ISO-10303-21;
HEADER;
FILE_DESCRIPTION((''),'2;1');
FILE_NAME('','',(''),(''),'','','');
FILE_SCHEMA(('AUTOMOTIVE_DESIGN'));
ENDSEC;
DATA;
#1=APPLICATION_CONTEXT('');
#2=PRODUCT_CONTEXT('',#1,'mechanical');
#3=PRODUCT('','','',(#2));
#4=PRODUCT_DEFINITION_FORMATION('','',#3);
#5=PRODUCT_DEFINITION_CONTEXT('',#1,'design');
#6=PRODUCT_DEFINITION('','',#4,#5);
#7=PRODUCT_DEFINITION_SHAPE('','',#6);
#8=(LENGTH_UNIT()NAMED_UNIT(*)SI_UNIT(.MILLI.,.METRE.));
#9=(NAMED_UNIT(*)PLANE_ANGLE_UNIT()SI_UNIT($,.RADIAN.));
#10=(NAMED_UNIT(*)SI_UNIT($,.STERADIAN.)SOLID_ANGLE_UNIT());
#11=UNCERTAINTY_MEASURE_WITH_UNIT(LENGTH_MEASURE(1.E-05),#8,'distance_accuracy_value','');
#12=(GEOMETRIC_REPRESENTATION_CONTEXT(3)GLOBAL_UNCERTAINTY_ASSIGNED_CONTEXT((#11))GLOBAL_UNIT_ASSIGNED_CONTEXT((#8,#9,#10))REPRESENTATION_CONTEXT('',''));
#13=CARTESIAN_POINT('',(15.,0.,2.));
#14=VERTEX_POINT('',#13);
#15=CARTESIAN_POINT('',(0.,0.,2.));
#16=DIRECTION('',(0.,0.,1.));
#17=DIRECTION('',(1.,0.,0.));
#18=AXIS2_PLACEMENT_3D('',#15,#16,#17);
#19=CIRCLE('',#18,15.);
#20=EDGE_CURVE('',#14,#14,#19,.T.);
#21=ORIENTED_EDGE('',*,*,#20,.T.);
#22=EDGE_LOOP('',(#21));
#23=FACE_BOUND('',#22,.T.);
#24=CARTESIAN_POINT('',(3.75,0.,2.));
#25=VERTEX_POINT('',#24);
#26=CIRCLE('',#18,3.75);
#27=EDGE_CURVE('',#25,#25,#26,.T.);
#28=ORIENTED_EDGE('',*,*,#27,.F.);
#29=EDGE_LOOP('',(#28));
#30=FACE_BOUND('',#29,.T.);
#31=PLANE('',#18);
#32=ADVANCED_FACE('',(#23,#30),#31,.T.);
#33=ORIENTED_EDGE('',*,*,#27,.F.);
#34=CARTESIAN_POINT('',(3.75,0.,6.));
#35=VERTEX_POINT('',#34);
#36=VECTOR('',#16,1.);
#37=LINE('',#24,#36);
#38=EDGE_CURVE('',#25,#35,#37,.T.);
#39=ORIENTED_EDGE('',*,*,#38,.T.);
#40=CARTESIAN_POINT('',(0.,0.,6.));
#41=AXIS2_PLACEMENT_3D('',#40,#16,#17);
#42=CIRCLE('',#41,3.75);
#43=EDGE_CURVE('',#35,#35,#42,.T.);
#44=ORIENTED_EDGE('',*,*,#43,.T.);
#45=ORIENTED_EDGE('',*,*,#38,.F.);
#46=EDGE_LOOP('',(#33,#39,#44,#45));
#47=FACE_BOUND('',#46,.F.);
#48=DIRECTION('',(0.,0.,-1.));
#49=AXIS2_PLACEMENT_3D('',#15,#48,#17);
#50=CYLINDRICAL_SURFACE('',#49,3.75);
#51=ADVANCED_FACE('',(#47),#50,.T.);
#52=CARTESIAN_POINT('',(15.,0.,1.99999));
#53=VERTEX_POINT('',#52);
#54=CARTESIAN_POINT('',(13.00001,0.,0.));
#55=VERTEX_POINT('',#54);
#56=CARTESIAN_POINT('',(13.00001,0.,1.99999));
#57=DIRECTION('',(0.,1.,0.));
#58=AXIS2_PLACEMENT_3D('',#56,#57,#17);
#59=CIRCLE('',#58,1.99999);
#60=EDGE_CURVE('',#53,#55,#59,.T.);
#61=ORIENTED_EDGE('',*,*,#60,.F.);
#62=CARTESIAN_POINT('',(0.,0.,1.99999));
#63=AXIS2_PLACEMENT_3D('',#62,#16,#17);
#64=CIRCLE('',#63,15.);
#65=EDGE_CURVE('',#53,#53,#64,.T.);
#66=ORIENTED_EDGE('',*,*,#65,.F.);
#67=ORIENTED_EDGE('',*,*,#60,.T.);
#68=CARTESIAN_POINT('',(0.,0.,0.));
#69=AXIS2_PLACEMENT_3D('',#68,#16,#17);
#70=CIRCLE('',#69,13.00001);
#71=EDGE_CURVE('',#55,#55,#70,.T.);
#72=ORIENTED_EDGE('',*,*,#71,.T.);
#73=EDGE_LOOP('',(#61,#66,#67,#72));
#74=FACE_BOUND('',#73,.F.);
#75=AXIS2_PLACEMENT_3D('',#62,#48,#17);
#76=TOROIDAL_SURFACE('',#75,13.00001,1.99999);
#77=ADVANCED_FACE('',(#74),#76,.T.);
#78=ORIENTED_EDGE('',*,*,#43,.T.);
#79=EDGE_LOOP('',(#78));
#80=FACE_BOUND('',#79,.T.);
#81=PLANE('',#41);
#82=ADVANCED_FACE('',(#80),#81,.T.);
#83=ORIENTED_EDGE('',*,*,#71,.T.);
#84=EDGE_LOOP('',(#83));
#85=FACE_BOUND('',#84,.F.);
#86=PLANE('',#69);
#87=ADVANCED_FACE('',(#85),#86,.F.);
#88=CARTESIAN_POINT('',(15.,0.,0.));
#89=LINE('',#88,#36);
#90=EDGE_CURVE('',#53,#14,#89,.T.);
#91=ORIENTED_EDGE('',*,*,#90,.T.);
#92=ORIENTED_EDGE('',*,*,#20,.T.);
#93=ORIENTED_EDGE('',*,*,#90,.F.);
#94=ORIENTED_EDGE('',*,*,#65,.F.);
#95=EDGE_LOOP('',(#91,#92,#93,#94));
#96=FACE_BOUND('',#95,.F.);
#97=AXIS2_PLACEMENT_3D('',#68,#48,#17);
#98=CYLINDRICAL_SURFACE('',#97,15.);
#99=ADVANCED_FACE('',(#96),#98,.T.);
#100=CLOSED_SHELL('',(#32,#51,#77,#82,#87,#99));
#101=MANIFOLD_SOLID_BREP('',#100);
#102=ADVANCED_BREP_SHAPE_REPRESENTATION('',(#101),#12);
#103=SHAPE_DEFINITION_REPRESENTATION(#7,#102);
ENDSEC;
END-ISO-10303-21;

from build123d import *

# Parameters (mm, degrees)
F0_R     = 15
F0_R_2   = 3.75
F1_DEPTH = 2
F2_R     = 3.75
F3_DEPTH = 4
F4_R     = 1.99999


# Not quite as in the source:
# - a fillet or chamfer is up to 0.001 mm smaller than in the source, because OpenCascade refuses the exact size


with BuildPart() as f1:
    # F0 (on Top) → F1 (new body)
    with BuildSketch(Plane.XY):
        Circle(F0_R)
        Circle(F0_R_2, mode=Mode.SUBTRACT)
        Circle(F0_R_2)
    extrude(amount=F1_DEPTH)

    # F2 (on face) → F3 (join)
    with BuildSketch(Plane.XY.offset(2)):
        Circle(F2_R)
    extrude(amount=F3_DEPTH)

    # F4 (radius 2 in the source; OpenCascade refuses exactly that, so slightly less here)
    f4_edges = [f1.edges().sort_by_distance(p)[0] for p in [
        (-15, 0, 0),
    ]]
    fillet(f4_edges, radius=F4_R)


solid = f1.part
